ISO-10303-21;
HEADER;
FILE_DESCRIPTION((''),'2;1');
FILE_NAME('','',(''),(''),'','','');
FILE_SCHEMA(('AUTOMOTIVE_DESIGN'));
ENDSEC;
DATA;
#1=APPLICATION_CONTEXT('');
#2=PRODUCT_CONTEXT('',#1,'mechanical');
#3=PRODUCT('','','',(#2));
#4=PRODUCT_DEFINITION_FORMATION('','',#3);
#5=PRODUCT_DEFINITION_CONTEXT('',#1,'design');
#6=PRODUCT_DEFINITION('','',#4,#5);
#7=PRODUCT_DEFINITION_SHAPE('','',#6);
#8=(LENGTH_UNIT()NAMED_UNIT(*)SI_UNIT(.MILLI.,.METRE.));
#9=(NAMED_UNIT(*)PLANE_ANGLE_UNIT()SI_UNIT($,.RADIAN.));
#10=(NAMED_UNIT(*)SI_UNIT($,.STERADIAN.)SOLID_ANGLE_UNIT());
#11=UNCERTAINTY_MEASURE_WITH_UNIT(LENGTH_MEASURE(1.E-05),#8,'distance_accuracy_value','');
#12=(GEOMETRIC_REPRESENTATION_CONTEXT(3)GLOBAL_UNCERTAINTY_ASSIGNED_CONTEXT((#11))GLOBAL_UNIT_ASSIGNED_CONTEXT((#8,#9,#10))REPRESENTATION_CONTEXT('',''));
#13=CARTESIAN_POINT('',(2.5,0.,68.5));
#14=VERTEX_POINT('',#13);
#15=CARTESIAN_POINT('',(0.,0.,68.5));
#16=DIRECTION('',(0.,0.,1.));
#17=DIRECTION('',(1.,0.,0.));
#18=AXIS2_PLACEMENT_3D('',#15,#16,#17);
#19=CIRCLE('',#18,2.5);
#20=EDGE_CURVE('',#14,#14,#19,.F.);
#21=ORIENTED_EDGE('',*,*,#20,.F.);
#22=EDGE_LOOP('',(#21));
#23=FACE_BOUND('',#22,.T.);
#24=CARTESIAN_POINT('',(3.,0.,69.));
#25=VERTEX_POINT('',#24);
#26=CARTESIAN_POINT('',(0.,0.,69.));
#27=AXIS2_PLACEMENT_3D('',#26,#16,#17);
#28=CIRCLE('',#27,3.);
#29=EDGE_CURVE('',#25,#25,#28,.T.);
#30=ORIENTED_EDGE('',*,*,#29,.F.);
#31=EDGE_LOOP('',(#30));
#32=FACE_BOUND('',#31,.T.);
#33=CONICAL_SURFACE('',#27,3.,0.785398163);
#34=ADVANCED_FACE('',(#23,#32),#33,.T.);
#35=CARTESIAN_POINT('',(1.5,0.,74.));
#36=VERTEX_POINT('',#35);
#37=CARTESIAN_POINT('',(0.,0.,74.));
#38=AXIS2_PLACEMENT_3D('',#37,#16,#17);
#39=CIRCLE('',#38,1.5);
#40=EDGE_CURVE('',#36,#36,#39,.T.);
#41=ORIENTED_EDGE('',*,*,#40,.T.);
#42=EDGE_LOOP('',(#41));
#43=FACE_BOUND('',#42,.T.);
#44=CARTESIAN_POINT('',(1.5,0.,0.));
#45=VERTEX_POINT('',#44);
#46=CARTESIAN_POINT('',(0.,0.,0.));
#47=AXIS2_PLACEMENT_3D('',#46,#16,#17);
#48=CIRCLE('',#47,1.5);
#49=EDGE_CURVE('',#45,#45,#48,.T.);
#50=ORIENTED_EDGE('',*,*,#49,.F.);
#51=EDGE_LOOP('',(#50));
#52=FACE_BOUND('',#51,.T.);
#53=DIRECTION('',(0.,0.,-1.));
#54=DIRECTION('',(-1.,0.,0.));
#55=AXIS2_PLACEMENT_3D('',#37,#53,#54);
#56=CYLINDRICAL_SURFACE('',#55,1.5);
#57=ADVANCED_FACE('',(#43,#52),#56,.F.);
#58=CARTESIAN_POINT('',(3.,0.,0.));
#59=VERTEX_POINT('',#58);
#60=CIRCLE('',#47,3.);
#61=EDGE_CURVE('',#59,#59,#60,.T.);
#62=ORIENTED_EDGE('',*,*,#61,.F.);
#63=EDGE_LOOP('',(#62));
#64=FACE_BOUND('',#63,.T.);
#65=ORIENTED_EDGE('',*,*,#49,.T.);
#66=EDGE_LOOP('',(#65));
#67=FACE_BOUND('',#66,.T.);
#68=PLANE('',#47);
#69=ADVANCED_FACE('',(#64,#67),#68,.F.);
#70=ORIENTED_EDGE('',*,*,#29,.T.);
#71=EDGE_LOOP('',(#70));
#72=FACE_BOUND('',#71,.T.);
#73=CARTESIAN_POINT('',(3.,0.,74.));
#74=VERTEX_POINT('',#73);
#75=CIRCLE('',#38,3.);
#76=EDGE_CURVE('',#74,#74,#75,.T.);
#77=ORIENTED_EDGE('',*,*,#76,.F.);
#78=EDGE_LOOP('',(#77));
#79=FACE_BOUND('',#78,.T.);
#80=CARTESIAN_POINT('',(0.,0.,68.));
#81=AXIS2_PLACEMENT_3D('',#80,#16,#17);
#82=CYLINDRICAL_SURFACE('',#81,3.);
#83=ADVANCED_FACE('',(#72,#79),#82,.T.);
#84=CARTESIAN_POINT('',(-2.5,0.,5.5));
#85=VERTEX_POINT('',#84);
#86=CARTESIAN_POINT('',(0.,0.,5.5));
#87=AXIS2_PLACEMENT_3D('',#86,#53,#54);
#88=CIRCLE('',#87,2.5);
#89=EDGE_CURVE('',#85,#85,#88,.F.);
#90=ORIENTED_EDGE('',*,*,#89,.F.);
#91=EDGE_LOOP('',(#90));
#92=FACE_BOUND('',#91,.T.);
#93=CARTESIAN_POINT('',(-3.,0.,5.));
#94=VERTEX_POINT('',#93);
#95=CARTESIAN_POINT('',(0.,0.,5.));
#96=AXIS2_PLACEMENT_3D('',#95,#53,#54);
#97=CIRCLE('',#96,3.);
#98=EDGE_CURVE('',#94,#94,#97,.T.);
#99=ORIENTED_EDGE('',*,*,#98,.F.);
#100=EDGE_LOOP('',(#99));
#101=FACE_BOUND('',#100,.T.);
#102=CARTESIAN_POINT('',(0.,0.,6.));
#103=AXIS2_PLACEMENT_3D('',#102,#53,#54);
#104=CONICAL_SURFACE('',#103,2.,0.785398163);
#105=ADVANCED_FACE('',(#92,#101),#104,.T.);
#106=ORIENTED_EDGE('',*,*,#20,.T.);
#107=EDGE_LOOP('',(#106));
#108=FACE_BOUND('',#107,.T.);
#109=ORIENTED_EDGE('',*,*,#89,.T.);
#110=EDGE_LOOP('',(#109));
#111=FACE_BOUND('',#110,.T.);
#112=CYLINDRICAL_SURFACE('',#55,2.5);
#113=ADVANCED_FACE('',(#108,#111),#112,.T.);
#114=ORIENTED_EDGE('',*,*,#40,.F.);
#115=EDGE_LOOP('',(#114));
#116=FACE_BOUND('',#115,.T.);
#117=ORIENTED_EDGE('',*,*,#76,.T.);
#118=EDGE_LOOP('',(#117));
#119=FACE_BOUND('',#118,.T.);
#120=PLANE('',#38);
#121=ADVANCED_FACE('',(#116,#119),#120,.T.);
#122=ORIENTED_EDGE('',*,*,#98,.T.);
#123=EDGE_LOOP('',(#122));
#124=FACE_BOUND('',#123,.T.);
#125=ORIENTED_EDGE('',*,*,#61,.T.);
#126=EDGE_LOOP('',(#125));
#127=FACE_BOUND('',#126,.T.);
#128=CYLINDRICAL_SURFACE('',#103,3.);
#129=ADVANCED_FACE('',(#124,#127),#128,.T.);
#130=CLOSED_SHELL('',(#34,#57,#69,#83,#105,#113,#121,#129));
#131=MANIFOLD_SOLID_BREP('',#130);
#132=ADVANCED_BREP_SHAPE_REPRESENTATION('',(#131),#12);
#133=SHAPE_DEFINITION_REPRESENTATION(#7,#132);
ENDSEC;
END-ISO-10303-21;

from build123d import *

# Parameters (mm, degrees)
SKETCH1_R                = 2.5
SKETCH1_R_2              = 1.5
BOSS_EXTRUDE1_DEPTH      = 74
BOSS_EXTRUDE2_START      = -6
SKETCH2_R                = 3
SKETCH2_R_2              = 1.5
BOSS_EXTRUDE2_DEPTH      = 6
CHAMFER1_SIZE            = 1
CHAMFER1_OF_MIRROR1_SIZE = 1


with BuildPart() as part:
    # Sketch1 → Boss-Extrude1 (new body)
    with BuildSketch(Plane.XY):
        Circle(SKETCH1_R)
        Circle(SKETCH1_R_2, mode=Mode.SUBTRACT)
    extrude(amount=BOSS_EXTRUDE1_DEPTH)

    # Sketch2 → Boss-Extrude2 (add)
    with BuildSketch(Plane.XY.offset(74).offset(BOSS_EXTRUDE2_START)):
        Circle(SKETCH2_R)
        Circle(SKETCH2_R_2, mode=Mode.SUBTRACT)
    boss_extrude2 = extrude(amount=BOSS_EXTRUDE2_DEPTH)

    # Chamfer1
    # the kernel refuses this chamfer: 1 mm, written as the material it takes off along each edge
    with BuildSketch(Plane(origin=(0, 0, 68), x_dir=(1, 0, 0), z_dir=(0, -1, 0))) as chamfer1_piece_1_section:
        Polygon((3 - CHAMFER1_SIZE, 0), (3, CHAMFER1_SIZE), (3, 0), align=None)
    chamfer1_piece_1 = revolve(axis=Axis((0, 0, 68), (0, 0, 1)), mode=Mode.PRIVATE)
    chamfer1_piece_1 = chamfer1_piece_1 - Plane(origin=(0, 0, 68.750504242), x_dir=(1, 0, 0), z_dir=(0, 0, -1)) * Cylinder(2.5, 12, mode=Mode.PRIVATE)
    add(chamfer1_piece_1, mode=Mode.SUBTRACT)

    # Mirror1: Boss-Extrude2 across plane
    add(boss_extrude2.mirror(Plane.XY.offset(37)))

    # Chamfer1 of Mirror1
    # the kernel refuses this chamfer: 1 mm, written as the material it takes off along each edge
    with BuildSketch(Plane(origin=(0, 0, 6), x_dir=(1, 0, 0), z_dir=(0, -1, 0))) as chamfer1_of_mirror1_piece_1_section:
        Polygon((3, -CHAMFER1_OF_MIRROR1_SIZE), (3 - CHAMFER1_OF_MIRROR1_SIZE, 0), (3, 0), align=None)
    chamfer1_of_mirror1_piece_1 = revolve(axis=Axis((0, 0, 6), (0, 0, 1)), mode=Mode.PRIVATE)
    chamfer1_of_mirror1_piece_1 = chamfer1_of_mirror1_piece_1 - Plane(origin=(0, 0, 5.249495758), x_dir=(1, 0, 0), z_dir=(0, 0, -1)) * Cylinder(2.5, 12, mode=Mode.PRIVATE)
    add(chamfer1_of_mirror1_piece_1, mode=Mode.SUBTRACT)


solid = part.part
